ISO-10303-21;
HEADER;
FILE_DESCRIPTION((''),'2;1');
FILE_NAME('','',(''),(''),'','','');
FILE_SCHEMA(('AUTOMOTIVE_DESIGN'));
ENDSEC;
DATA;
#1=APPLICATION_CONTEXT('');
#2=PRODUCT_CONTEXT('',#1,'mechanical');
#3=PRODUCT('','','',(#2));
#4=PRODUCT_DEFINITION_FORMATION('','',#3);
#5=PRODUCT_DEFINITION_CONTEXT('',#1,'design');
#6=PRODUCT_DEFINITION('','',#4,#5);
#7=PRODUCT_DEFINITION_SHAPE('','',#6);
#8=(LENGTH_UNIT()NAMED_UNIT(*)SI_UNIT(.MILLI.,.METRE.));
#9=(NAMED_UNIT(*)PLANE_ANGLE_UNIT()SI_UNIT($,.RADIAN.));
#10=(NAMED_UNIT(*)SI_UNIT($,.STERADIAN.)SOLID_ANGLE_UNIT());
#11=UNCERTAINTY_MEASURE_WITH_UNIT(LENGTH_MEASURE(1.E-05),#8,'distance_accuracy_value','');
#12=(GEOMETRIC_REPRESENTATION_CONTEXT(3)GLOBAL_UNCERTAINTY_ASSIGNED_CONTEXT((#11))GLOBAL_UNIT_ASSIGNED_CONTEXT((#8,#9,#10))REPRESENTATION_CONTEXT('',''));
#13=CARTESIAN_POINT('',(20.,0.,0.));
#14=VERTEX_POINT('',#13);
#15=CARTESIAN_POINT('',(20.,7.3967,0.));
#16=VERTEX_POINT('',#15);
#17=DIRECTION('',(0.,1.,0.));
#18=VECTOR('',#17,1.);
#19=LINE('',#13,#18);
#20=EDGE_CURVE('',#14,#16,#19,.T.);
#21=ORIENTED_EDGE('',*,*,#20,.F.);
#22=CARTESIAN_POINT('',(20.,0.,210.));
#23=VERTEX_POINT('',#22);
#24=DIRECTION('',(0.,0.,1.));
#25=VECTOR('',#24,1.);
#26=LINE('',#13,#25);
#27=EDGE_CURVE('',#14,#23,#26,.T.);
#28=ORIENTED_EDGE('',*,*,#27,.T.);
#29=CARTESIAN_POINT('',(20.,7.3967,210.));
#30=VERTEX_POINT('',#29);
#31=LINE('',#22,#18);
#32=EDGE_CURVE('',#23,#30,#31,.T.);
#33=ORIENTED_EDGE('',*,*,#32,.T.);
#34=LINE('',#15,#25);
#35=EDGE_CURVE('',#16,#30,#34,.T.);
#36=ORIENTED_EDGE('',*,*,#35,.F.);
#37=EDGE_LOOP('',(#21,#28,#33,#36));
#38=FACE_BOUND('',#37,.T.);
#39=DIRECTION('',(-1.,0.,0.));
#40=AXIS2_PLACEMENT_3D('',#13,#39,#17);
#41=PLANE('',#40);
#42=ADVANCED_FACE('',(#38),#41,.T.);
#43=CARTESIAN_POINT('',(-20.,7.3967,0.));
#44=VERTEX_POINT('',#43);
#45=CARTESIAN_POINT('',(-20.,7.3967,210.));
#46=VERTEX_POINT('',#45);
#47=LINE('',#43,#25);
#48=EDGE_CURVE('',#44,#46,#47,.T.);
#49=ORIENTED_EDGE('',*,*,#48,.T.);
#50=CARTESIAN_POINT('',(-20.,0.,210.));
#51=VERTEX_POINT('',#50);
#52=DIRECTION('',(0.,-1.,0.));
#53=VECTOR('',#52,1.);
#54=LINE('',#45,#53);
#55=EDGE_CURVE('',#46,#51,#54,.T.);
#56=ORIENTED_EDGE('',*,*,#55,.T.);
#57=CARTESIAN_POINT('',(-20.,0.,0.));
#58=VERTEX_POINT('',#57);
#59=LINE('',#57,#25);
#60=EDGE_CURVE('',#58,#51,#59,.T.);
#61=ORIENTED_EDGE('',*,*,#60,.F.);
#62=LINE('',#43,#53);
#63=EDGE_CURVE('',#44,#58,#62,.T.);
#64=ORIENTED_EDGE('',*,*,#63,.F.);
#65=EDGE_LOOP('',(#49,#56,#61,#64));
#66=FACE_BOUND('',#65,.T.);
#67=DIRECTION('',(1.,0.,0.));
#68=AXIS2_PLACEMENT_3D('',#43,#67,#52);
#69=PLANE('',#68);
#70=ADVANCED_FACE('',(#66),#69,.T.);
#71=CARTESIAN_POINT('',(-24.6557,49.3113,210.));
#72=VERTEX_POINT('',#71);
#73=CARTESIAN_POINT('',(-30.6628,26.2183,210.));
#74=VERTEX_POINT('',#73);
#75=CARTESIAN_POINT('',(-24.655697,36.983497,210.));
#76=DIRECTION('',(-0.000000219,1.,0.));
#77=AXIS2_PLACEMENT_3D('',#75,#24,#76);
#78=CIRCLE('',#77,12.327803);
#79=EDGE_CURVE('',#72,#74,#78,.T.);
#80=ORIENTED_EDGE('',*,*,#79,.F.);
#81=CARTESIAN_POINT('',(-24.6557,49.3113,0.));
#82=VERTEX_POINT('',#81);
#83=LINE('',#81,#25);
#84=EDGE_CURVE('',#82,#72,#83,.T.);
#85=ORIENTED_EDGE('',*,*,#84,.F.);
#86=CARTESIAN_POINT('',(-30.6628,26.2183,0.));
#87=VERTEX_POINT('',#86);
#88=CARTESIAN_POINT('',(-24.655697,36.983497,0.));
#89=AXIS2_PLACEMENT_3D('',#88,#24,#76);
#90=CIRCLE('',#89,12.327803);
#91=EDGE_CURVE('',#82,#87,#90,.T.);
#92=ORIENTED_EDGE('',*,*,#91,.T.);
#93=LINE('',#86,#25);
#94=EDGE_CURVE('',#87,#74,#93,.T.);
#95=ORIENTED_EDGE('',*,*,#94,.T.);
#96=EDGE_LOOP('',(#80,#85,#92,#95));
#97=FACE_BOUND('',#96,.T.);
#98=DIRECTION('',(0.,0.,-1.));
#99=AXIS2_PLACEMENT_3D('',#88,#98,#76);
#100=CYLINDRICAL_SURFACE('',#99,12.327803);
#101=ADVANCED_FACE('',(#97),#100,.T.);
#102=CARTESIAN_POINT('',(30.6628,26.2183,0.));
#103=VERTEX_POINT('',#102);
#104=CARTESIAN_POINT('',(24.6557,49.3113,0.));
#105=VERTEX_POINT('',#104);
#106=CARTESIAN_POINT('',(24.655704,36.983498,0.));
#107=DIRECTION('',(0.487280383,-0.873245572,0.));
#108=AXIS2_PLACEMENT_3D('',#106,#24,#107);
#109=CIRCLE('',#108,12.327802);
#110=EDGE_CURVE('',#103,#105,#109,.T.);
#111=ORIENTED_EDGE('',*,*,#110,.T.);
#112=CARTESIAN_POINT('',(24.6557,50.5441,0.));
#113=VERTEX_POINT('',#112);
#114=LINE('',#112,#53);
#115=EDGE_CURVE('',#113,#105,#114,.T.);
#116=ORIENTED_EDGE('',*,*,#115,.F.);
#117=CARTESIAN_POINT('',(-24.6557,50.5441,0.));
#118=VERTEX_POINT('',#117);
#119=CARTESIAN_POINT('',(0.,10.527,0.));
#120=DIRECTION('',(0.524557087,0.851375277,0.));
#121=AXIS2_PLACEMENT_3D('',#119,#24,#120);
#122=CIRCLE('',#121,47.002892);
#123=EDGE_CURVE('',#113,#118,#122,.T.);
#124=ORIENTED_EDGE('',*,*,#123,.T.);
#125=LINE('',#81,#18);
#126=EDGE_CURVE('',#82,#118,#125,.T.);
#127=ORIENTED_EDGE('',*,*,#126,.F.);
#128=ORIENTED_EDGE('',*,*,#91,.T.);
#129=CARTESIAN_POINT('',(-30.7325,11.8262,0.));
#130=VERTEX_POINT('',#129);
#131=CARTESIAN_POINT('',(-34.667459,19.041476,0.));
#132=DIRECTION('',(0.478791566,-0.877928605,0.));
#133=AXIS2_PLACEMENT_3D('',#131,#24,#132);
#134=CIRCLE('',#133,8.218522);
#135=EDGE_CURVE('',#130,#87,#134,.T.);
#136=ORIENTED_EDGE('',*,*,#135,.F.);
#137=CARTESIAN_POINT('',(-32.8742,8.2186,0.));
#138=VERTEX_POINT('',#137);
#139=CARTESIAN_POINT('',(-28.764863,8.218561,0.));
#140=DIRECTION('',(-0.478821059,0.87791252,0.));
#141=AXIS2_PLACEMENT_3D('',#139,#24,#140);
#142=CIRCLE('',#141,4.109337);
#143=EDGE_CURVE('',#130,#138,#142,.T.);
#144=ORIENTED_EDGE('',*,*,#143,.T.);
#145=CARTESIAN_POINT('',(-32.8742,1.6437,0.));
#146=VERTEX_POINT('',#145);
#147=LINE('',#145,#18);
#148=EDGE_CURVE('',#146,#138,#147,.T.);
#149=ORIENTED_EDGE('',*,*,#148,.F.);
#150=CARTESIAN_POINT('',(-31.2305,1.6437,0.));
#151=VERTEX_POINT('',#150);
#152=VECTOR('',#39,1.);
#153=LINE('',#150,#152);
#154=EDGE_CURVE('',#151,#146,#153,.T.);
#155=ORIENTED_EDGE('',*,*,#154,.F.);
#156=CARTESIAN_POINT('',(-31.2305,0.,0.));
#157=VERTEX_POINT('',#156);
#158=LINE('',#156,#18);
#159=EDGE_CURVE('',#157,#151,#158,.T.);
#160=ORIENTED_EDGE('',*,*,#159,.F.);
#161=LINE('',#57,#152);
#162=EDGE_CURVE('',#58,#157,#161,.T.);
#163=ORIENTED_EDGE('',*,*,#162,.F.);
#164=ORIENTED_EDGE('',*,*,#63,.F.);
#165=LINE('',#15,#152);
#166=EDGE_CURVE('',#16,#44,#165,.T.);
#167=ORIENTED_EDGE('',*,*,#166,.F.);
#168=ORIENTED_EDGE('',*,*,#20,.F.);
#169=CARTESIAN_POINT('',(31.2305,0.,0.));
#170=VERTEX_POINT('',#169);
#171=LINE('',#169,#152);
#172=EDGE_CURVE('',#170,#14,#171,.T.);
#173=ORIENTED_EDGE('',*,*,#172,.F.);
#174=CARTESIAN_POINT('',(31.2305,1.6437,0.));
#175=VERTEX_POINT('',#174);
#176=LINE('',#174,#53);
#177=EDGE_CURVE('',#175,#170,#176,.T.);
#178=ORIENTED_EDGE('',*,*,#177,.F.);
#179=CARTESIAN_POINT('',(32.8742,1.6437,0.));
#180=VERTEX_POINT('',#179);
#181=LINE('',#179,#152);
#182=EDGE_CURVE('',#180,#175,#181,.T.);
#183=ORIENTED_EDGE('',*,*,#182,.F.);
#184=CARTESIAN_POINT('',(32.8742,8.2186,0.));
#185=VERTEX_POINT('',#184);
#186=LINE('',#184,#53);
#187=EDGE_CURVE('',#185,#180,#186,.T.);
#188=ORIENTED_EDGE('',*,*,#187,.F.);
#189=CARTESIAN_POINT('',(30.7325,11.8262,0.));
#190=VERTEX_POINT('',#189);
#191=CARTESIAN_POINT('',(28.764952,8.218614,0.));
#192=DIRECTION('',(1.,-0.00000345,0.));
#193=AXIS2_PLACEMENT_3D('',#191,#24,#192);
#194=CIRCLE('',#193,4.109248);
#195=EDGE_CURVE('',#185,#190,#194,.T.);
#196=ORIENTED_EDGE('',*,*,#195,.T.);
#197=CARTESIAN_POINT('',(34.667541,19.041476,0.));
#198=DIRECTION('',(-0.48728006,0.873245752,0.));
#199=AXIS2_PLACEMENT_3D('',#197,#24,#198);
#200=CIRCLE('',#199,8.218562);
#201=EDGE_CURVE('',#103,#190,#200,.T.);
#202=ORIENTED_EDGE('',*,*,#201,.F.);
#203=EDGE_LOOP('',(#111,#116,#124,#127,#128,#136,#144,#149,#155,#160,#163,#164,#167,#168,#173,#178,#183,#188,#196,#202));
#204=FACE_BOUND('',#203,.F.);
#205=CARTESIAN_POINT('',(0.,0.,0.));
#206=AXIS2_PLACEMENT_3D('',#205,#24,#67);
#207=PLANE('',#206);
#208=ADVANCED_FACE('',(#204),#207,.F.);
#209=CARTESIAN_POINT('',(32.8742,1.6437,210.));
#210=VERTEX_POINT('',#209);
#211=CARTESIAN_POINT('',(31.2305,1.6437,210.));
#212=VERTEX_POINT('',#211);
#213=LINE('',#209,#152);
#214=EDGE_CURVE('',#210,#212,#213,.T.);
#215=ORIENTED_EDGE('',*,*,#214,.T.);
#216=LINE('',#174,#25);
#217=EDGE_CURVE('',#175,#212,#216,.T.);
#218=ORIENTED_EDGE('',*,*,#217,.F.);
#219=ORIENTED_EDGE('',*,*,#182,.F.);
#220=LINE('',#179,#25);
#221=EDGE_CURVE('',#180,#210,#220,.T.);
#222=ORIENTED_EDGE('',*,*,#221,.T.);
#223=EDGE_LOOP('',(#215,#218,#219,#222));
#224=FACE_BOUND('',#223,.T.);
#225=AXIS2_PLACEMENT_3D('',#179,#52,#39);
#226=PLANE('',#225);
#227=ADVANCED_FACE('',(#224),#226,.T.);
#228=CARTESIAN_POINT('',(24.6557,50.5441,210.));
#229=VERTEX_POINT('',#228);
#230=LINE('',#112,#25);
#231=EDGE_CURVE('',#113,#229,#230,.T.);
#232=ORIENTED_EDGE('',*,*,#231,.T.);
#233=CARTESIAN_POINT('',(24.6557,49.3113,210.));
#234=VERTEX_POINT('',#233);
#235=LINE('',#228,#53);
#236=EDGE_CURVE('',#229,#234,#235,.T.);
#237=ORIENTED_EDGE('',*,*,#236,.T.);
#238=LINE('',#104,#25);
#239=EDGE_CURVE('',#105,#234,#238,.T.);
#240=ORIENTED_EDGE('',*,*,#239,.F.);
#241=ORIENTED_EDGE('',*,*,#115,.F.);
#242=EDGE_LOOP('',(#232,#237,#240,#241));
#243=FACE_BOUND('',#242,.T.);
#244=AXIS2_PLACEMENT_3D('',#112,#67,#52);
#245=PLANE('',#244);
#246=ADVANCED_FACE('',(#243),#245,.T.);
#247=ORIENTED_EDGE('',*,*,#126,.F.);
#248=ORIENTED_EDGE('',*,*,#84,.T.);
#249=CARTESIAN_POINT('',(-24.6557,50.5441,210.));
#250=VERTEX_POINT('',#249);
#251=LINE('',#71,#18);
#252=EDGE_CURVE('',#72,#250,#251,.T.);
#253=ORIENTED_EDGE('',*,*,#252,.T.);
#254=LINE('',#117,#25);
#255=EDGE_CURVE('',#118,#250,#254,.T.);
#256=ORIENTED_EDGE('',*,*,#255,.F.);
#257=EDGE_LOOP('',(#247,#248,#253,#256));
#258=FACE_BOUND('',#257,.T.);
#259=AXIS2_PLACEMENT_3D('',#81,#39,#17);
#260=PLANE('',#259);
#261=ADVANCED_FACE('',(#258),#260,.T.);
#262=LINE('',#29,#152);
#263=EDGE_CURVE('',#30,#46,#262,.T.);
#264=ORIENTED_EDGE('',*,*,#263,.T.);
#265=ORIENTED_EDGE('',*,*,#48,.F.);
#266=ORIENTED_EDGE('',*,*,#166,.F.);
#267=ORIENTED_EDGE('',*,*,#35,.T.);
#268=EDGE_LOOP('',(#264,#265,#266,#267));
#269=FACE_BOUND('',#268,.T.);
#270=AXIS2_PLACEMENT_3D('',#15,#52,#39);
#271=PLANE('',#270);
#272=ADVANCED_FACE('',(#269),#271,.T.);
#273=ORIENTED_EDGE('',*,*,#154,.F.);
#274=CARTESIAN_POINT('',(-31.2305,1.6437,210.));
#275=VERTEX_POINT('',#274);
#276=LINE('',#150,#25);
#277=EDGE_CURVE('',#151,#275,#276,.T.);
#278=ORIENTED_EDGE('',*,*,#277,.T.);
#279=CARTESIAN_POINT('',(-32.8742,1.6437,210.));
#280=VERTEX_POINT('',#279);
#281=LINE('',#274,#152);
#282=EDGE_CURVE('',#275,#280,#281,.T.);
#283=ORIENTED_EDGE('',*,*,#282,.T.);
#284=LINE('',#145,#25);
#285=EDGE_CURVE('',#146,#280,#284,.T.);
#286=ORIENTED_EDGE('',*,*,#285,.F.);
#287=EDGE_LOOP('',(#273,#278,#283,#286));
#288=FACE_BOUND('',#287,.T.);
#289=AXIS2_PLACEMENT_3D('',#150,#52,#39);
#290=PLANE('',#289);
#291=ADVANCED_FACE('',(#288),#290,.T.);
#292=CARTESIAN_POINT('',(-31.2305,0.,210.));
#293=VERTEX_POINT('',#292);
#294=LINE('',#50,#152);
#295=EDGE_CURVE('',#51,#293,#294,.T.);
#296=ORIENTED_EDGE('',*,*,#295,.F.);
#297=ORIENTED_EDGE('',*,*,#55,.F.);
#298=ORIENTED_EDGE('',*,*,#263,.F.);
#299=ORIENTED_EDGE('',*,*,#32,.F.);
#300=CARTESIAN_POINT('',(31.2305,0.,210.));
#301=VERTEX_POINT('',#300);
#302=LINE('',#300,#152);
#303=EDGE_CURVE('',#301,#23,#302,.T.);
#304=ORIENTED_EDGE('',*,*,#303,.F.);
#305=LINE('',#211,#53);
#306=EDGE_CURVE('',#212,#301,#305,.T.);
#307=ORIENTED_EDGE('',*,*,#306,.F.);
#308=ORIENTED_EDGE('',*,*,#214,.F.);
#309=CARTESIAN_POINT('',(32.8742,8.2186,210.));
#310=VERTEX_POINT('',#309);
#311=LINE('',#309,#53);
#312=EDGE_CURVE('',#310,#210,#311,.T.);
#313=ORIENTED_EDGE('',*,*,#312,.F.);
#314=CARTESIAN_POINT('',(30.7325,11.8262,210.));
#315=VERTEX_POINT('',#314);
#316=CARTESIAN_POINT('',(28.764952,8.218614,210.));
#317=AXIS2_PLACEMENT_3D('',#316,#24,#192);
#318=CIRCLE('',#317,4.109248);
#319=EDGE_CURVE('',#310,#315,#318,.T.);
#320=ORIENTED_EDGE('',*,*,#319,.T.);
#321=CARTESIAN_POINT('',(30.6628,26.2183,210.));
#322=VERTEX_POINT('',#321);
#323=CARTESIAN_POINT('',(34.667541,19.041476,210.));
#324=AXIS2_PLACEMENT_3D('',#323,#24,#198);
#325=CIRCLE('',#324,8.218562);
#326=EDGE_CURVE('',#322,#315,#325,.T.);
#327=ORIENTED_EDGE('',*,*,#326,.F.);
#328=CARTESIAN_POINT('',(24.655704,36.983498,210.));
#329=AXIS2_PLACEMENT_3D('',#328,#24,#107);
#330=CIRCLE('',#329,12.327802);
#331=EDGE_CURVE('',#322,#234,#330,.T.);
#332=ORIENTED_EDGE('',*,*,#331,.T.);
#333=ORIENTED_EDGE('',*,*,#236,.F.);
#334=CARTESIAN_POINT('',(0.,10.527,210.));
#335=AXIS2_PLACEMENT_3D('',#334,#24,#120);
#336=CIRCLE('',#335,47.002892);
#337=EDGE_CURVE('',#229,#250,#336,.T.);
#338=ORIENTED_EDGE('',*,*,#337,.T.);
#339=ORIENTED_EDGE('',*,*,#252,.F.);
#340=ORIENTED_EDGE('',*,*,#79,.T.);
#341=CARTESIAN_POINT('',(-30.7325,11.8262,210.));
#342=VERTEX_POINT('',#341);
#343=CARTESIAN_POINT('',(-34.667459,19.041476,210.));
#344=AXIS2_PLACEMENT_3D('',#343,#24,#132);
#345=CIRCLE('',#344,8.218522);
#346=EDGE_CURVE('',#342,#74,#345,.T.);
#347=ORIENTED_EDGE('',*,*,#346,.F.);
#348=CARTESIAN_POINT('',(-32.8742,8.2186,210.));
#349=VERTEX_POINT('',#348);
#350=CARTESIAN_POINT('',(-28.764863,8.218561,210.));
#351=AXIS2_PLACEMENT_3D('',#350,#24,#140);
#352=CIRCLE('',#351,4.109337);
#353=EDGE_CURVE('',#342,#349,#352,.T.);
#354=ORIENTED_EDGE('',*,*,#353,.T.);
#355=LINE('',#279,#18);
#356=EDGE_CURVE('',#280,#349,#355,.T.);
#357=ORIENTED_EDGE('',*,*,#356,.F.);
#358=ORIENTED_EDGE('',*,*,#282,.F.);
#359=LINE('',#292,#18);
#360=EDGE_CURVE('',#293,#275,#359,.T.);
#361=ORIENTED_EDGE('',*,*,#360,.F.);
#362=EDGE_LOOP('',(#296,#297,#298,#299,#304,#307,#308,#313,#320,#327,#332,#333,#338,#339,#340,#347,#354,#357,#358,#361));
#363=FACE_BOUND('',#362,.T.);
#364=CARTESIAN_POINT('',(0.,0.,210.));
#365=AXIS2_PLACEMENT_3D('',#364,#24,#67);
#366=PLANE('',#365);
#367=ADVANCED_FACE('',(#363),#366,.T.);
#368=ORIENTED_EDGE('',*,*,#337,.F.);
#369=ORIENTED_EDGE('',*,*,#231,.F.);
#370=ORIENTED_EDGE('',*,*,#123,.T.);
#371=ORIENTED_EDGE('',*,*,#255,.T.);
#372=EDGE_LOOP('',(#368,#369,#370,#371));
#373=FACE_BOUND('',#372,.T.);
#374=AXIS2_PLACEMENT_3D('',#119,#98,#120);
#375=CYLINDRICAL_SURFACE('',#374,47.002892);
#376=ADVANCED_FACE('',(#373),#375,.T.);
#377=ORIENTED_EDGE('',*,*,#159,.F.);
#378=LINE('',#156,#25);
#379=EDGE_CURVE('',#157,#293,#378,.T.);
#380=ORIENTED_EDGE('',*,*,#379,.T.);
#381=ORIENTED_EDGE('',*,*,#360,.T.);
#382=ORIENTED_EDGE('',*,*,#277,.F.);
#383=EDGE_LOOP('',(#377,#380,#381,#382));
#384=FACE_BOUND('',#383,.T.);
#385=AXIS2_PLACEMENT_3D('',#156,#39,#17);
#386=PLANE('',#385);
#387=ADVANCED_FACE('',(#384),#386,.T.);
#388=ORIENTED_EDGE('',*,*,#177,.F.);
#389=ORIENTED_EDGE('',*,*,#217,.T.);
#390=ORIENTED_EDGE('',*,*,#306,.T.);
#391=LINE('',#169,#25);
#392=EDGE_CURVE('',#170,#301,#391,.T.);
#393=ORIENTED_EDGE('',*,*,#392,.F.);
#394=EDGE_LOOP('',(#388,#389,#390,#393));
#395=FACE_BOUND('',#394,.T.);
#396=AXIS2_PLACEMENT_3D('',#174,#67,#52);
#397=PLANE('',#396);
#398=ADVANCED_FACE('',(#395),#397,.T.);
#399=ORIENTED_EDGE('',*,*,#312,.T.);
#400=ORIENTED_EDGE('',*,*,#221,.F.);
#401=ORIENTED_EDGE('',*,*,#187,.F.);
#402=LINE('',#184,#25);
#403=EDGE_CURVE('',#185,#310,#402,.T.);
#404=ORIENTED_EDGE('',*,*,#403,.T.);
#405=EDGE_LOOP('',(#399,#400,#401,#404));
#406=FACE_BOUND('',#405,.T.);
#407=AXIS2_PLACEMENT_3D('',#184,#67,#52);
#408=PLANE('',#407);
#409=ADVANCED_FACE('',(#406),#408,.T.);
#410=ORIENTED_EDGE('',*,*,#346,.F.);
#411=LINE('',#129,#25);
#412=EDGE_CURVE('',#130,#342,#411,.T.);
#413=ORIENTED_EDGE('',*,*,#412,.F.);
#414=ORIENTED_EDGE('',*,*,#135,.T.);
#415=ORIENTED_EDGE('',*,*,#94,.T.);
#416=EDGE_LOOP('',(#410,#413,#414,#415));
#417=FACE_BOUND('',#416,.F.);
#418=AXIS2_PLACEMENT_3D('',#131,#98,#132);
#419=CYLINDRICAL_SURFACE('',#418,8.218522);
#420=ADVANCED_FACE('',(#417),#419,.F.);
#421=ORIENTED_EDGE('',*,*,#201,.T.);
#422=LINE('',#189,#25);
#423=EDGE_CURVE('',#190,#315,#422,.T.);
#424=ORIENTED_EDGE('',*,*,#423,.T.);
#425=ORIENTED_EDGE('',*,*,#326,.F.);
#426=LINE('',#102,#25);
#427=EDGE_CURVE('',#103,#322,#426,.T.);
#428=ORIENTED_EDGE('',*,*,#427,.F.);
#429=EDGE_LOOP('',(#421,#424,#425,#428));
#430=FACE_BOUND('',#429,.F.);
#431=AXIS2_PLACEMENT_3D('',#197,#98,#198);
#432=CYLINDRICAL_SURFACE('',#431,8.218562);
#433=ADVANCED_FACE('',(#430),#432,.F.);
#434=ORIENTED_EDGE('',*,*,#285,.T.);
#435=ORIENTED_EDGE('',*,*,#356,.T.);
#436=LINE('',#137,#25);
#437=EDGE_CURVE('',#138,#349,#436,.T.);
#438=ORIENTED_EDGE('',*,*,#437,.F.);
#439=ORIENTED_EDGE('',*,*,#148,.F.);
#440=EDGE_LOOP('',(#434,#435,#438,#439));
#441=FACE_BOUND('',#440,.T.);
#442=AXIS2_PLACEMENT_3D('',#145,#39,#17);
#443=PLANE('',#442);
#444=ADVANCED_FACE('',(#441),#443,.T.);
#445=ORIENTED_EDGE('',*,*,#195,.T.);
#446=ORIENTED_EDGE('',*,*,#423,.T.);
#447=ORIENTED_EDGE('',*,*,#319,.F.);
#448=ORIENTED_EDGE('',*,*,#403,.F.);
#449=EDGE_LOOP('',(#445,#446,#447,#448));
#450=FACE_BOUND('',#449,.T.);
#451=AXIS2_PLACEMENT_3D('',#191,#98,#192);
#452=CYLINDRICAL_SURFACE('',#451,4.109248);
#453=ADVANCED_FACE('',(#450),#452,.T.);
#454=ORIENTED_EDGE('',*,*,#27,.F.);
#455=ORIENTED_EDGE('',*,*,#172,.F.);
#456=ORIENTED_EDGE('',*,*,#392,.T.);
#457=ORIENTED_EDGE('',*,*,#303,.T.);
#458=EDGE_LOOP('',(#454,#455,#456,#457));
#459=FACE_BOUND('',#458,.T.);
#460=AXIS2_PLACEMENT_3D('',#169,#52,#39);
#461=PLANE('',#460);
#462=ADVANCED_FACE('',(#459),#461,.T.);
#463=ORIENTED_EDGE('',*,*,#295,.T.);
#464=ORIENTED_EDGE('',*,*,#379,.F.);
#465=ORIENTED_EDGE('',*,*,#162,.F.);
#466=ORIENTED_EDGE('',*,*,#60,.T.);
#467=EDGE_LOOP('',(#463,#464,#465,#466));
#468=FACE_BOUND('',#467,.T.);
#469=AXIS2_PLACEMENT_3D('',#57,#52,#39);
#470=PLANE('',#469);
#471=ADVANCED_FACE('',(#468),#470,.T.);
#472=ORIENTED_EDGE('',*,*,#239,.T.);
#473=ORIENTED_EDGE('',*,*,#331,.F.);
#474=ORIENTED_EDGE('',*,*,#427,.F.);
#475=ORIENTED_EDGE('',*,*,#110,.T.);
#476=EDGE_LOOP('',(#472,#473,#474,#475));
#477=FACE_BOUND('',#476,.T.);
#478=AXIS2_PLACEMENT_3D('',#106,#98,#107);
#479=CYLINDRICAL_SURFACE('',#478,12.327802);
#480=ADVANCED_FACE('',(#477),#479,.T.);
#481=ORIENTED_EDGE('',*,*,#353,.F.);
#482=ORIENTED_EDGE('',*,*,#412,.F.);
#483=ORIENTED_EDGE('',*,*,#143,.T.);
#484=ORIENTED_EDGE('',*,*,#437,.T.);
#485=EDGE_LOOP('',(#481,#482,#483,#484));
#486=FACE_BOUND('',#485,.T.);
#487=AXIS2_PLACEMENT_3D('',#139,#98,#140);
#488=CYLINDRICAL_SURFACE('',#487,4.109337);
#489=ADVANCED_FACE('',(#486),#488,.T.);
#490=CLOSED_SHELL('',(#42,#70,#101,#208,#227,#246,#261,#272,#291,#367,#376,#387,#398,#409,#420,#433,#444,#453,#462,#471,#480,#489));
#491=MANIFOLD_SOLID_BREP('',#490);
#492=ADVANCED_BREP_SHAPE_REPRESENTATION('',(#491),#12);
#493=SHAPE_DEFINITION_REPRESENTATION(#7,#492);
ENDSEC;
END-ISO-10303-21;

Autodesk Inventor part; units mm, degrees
ref_plane "YZ Plane" through (0, 0, 0) normal (1, 0, 0) x (0, 1, 0)
ref_plane "XZ Plane" through (0, 0, 0) normal (0, 1, 0) x (-1, 0, 0)
sketch "Поручень" plane through (0, 0, 0) normal (0, 0, 1) x (1, 0, 0)
  line L0 (20.3655, -7.6059) -> (20.3655, -0.2092)
  line L1 (20.3655, -0.2092) -> (-19.6345, -0.2092)
  line L2 (-19.6345, -0.2092) -> (-19.6345, -7.6059)
  line L3 (-19.6345, -7.6059) -> (-30.865, -7.6059)
  line L4 (-30.865, -7.6059) -> (-30.865, -5.9622)
  line L5 (-30.865, -5.9622) -> (-32.5087, -5.9622)
  line L6 (-32.5087, -5.9622) -> (-32.5087, 0.6126)
  arc A0 (-30.367, 4.2203) -> (-32.5087, 0.6126) centre (-28.3995, 0.6126) ccw
  arc A1 (-30.367, 4.2203) -> (-30.2973, 18.6123) centre (-34.302, 11.4355) ccw
  arc A2 (-24.2902, 41.7054) -> (-30.2973, 18.6123) centre (-24.2902, 29.3776) ccw
  line L7 (-24.2902, 41.7054) -> (-24.2902, 42.9382)
  arc A3 (25.0211, 42.9382) -> (-24.2902, 42.9382) centre (0.3655, 2.9211) ccw
  line L8 (25.0211, 42.9382) -> (25.0211, 41.7054)
  arc A4 (31.0282, 18.6123) -> (25.0211, 41.7054) centre (25.0211, 29.3776) ccw
  arc A5 (31.0282, 18.6123) -> (31.0979, 4.2203) centre (35.033, 11.4355) ccw
  arc A6 (33.2397, 0.6126) -> (31.0979, 4.2203) centre (29.1304, 0.6126) ccw
  line L9 (33.2397, 0.6126) -> (33.2397, -5.9622)
  line L10 (33.2397, -5.9622) -> (31.596, -5.9622)
  line L11 (31.596, -5.9622) -> (31.596, -7.6059)
  line L12 (31.596, -7.6059) -> (20.3655, -7.6059)
  point P0 (0.3655, -0.2092)
  point P1 (0.3655, -7.6059)
sketch "Эскиз" plane through (0, 0, 0) normal (0, 0, 1) x (1, 0, 0)
  line L0 (20, 0) -> (20, 7.3967)
  line L1 (20, 7.3967) -> (-20, 7.3967)
  line L2 (-20, 7.3967) -> (-20, 0)
  line L3 (-20, 0) -> (-31.2305, 0)
  line L4 (-31.2305, 0) -> (-31.2305, 1.6437)
  line L5 (-31.2305, 1.6437) -> (-32.8742, 1.6437)
  line L6 (-32.8742, 1.6437) -> (-32.8742, 8.2186)
  arc A0 (-30.7325, 11.8262) -> (-32.8742, 8.2186) centre (-28.7649, 8.2186) ccw
  arc A1 (-30.7325, 11.8262) -> (-30.6628, 26.2183) centre (-34.6675, 19.0415) ccw
  arc A2 (-24.6557, 49.3113) -> (-30.6628, 26.2183) centre (-24.6557, 36.9835) ccw
  line L7 (-24.6557, 49.3113) -> (-24.6557, 50.5441)
  arc A3 (24.6557, 50.5441) -> (-24.6557, 50.5441) centre (0, 10.527) ccw
  line L8 (24.6557, 50.5441) -> (24.6557, 49.3113)
  arc A4 (30.6628, 26.2183) -> (24.6557, 49.3113) centre (24.6557, 36.9835) ccw
  arc A5 (30.6628, 26.2183) -> (30.7325, 11.8262) centre (34.6675, 19.0415) ccw
  arc A6 (32.8742, 8.2186) -> (30.7325, 11.8262) centre (28.7649, 8.2186) ccw
  line L9 (32.8742, 8.2186) -> (32.8742, 1.6437)
  line L10 (32.8742, 1.6437) -> (31.2305, 1.6437)
  line L11 (31.2305, 1.6437) -> (31.2305, 0)
  line L12 (31.2305, 0) -> (20, 0)
  point P0 (0, 0)
ref_plane "Начальная плоскость" through (0, 0, 0) normal (0, 0, 1) x (1, 0, 0)
ref_plane "РабПлоскость2" through (0, 0, 210) normal (0, 0, 1) x (1, 0, 0)
extrude "Тело" add sketch "Эскиз" along normal up to surface (210 mm away) from surface at 0
ref_plane "Конечная плоскость" through (0, 0, 210) normal (0, 0, 1) x (1, 0, 0)
equation "\"ШИРИНА\" = 75"
equation "\"ТОЛЩВЫС\" = 58"
equation "\"СЕЧЕНИЕ_СМЕЩ\" = 0"
equation "\"G_OFFSET_END\" = 0"
equation "\"G_OFFSET_START\" = 0"
properties part number "Поручень" material "Древесина (дуб)"
